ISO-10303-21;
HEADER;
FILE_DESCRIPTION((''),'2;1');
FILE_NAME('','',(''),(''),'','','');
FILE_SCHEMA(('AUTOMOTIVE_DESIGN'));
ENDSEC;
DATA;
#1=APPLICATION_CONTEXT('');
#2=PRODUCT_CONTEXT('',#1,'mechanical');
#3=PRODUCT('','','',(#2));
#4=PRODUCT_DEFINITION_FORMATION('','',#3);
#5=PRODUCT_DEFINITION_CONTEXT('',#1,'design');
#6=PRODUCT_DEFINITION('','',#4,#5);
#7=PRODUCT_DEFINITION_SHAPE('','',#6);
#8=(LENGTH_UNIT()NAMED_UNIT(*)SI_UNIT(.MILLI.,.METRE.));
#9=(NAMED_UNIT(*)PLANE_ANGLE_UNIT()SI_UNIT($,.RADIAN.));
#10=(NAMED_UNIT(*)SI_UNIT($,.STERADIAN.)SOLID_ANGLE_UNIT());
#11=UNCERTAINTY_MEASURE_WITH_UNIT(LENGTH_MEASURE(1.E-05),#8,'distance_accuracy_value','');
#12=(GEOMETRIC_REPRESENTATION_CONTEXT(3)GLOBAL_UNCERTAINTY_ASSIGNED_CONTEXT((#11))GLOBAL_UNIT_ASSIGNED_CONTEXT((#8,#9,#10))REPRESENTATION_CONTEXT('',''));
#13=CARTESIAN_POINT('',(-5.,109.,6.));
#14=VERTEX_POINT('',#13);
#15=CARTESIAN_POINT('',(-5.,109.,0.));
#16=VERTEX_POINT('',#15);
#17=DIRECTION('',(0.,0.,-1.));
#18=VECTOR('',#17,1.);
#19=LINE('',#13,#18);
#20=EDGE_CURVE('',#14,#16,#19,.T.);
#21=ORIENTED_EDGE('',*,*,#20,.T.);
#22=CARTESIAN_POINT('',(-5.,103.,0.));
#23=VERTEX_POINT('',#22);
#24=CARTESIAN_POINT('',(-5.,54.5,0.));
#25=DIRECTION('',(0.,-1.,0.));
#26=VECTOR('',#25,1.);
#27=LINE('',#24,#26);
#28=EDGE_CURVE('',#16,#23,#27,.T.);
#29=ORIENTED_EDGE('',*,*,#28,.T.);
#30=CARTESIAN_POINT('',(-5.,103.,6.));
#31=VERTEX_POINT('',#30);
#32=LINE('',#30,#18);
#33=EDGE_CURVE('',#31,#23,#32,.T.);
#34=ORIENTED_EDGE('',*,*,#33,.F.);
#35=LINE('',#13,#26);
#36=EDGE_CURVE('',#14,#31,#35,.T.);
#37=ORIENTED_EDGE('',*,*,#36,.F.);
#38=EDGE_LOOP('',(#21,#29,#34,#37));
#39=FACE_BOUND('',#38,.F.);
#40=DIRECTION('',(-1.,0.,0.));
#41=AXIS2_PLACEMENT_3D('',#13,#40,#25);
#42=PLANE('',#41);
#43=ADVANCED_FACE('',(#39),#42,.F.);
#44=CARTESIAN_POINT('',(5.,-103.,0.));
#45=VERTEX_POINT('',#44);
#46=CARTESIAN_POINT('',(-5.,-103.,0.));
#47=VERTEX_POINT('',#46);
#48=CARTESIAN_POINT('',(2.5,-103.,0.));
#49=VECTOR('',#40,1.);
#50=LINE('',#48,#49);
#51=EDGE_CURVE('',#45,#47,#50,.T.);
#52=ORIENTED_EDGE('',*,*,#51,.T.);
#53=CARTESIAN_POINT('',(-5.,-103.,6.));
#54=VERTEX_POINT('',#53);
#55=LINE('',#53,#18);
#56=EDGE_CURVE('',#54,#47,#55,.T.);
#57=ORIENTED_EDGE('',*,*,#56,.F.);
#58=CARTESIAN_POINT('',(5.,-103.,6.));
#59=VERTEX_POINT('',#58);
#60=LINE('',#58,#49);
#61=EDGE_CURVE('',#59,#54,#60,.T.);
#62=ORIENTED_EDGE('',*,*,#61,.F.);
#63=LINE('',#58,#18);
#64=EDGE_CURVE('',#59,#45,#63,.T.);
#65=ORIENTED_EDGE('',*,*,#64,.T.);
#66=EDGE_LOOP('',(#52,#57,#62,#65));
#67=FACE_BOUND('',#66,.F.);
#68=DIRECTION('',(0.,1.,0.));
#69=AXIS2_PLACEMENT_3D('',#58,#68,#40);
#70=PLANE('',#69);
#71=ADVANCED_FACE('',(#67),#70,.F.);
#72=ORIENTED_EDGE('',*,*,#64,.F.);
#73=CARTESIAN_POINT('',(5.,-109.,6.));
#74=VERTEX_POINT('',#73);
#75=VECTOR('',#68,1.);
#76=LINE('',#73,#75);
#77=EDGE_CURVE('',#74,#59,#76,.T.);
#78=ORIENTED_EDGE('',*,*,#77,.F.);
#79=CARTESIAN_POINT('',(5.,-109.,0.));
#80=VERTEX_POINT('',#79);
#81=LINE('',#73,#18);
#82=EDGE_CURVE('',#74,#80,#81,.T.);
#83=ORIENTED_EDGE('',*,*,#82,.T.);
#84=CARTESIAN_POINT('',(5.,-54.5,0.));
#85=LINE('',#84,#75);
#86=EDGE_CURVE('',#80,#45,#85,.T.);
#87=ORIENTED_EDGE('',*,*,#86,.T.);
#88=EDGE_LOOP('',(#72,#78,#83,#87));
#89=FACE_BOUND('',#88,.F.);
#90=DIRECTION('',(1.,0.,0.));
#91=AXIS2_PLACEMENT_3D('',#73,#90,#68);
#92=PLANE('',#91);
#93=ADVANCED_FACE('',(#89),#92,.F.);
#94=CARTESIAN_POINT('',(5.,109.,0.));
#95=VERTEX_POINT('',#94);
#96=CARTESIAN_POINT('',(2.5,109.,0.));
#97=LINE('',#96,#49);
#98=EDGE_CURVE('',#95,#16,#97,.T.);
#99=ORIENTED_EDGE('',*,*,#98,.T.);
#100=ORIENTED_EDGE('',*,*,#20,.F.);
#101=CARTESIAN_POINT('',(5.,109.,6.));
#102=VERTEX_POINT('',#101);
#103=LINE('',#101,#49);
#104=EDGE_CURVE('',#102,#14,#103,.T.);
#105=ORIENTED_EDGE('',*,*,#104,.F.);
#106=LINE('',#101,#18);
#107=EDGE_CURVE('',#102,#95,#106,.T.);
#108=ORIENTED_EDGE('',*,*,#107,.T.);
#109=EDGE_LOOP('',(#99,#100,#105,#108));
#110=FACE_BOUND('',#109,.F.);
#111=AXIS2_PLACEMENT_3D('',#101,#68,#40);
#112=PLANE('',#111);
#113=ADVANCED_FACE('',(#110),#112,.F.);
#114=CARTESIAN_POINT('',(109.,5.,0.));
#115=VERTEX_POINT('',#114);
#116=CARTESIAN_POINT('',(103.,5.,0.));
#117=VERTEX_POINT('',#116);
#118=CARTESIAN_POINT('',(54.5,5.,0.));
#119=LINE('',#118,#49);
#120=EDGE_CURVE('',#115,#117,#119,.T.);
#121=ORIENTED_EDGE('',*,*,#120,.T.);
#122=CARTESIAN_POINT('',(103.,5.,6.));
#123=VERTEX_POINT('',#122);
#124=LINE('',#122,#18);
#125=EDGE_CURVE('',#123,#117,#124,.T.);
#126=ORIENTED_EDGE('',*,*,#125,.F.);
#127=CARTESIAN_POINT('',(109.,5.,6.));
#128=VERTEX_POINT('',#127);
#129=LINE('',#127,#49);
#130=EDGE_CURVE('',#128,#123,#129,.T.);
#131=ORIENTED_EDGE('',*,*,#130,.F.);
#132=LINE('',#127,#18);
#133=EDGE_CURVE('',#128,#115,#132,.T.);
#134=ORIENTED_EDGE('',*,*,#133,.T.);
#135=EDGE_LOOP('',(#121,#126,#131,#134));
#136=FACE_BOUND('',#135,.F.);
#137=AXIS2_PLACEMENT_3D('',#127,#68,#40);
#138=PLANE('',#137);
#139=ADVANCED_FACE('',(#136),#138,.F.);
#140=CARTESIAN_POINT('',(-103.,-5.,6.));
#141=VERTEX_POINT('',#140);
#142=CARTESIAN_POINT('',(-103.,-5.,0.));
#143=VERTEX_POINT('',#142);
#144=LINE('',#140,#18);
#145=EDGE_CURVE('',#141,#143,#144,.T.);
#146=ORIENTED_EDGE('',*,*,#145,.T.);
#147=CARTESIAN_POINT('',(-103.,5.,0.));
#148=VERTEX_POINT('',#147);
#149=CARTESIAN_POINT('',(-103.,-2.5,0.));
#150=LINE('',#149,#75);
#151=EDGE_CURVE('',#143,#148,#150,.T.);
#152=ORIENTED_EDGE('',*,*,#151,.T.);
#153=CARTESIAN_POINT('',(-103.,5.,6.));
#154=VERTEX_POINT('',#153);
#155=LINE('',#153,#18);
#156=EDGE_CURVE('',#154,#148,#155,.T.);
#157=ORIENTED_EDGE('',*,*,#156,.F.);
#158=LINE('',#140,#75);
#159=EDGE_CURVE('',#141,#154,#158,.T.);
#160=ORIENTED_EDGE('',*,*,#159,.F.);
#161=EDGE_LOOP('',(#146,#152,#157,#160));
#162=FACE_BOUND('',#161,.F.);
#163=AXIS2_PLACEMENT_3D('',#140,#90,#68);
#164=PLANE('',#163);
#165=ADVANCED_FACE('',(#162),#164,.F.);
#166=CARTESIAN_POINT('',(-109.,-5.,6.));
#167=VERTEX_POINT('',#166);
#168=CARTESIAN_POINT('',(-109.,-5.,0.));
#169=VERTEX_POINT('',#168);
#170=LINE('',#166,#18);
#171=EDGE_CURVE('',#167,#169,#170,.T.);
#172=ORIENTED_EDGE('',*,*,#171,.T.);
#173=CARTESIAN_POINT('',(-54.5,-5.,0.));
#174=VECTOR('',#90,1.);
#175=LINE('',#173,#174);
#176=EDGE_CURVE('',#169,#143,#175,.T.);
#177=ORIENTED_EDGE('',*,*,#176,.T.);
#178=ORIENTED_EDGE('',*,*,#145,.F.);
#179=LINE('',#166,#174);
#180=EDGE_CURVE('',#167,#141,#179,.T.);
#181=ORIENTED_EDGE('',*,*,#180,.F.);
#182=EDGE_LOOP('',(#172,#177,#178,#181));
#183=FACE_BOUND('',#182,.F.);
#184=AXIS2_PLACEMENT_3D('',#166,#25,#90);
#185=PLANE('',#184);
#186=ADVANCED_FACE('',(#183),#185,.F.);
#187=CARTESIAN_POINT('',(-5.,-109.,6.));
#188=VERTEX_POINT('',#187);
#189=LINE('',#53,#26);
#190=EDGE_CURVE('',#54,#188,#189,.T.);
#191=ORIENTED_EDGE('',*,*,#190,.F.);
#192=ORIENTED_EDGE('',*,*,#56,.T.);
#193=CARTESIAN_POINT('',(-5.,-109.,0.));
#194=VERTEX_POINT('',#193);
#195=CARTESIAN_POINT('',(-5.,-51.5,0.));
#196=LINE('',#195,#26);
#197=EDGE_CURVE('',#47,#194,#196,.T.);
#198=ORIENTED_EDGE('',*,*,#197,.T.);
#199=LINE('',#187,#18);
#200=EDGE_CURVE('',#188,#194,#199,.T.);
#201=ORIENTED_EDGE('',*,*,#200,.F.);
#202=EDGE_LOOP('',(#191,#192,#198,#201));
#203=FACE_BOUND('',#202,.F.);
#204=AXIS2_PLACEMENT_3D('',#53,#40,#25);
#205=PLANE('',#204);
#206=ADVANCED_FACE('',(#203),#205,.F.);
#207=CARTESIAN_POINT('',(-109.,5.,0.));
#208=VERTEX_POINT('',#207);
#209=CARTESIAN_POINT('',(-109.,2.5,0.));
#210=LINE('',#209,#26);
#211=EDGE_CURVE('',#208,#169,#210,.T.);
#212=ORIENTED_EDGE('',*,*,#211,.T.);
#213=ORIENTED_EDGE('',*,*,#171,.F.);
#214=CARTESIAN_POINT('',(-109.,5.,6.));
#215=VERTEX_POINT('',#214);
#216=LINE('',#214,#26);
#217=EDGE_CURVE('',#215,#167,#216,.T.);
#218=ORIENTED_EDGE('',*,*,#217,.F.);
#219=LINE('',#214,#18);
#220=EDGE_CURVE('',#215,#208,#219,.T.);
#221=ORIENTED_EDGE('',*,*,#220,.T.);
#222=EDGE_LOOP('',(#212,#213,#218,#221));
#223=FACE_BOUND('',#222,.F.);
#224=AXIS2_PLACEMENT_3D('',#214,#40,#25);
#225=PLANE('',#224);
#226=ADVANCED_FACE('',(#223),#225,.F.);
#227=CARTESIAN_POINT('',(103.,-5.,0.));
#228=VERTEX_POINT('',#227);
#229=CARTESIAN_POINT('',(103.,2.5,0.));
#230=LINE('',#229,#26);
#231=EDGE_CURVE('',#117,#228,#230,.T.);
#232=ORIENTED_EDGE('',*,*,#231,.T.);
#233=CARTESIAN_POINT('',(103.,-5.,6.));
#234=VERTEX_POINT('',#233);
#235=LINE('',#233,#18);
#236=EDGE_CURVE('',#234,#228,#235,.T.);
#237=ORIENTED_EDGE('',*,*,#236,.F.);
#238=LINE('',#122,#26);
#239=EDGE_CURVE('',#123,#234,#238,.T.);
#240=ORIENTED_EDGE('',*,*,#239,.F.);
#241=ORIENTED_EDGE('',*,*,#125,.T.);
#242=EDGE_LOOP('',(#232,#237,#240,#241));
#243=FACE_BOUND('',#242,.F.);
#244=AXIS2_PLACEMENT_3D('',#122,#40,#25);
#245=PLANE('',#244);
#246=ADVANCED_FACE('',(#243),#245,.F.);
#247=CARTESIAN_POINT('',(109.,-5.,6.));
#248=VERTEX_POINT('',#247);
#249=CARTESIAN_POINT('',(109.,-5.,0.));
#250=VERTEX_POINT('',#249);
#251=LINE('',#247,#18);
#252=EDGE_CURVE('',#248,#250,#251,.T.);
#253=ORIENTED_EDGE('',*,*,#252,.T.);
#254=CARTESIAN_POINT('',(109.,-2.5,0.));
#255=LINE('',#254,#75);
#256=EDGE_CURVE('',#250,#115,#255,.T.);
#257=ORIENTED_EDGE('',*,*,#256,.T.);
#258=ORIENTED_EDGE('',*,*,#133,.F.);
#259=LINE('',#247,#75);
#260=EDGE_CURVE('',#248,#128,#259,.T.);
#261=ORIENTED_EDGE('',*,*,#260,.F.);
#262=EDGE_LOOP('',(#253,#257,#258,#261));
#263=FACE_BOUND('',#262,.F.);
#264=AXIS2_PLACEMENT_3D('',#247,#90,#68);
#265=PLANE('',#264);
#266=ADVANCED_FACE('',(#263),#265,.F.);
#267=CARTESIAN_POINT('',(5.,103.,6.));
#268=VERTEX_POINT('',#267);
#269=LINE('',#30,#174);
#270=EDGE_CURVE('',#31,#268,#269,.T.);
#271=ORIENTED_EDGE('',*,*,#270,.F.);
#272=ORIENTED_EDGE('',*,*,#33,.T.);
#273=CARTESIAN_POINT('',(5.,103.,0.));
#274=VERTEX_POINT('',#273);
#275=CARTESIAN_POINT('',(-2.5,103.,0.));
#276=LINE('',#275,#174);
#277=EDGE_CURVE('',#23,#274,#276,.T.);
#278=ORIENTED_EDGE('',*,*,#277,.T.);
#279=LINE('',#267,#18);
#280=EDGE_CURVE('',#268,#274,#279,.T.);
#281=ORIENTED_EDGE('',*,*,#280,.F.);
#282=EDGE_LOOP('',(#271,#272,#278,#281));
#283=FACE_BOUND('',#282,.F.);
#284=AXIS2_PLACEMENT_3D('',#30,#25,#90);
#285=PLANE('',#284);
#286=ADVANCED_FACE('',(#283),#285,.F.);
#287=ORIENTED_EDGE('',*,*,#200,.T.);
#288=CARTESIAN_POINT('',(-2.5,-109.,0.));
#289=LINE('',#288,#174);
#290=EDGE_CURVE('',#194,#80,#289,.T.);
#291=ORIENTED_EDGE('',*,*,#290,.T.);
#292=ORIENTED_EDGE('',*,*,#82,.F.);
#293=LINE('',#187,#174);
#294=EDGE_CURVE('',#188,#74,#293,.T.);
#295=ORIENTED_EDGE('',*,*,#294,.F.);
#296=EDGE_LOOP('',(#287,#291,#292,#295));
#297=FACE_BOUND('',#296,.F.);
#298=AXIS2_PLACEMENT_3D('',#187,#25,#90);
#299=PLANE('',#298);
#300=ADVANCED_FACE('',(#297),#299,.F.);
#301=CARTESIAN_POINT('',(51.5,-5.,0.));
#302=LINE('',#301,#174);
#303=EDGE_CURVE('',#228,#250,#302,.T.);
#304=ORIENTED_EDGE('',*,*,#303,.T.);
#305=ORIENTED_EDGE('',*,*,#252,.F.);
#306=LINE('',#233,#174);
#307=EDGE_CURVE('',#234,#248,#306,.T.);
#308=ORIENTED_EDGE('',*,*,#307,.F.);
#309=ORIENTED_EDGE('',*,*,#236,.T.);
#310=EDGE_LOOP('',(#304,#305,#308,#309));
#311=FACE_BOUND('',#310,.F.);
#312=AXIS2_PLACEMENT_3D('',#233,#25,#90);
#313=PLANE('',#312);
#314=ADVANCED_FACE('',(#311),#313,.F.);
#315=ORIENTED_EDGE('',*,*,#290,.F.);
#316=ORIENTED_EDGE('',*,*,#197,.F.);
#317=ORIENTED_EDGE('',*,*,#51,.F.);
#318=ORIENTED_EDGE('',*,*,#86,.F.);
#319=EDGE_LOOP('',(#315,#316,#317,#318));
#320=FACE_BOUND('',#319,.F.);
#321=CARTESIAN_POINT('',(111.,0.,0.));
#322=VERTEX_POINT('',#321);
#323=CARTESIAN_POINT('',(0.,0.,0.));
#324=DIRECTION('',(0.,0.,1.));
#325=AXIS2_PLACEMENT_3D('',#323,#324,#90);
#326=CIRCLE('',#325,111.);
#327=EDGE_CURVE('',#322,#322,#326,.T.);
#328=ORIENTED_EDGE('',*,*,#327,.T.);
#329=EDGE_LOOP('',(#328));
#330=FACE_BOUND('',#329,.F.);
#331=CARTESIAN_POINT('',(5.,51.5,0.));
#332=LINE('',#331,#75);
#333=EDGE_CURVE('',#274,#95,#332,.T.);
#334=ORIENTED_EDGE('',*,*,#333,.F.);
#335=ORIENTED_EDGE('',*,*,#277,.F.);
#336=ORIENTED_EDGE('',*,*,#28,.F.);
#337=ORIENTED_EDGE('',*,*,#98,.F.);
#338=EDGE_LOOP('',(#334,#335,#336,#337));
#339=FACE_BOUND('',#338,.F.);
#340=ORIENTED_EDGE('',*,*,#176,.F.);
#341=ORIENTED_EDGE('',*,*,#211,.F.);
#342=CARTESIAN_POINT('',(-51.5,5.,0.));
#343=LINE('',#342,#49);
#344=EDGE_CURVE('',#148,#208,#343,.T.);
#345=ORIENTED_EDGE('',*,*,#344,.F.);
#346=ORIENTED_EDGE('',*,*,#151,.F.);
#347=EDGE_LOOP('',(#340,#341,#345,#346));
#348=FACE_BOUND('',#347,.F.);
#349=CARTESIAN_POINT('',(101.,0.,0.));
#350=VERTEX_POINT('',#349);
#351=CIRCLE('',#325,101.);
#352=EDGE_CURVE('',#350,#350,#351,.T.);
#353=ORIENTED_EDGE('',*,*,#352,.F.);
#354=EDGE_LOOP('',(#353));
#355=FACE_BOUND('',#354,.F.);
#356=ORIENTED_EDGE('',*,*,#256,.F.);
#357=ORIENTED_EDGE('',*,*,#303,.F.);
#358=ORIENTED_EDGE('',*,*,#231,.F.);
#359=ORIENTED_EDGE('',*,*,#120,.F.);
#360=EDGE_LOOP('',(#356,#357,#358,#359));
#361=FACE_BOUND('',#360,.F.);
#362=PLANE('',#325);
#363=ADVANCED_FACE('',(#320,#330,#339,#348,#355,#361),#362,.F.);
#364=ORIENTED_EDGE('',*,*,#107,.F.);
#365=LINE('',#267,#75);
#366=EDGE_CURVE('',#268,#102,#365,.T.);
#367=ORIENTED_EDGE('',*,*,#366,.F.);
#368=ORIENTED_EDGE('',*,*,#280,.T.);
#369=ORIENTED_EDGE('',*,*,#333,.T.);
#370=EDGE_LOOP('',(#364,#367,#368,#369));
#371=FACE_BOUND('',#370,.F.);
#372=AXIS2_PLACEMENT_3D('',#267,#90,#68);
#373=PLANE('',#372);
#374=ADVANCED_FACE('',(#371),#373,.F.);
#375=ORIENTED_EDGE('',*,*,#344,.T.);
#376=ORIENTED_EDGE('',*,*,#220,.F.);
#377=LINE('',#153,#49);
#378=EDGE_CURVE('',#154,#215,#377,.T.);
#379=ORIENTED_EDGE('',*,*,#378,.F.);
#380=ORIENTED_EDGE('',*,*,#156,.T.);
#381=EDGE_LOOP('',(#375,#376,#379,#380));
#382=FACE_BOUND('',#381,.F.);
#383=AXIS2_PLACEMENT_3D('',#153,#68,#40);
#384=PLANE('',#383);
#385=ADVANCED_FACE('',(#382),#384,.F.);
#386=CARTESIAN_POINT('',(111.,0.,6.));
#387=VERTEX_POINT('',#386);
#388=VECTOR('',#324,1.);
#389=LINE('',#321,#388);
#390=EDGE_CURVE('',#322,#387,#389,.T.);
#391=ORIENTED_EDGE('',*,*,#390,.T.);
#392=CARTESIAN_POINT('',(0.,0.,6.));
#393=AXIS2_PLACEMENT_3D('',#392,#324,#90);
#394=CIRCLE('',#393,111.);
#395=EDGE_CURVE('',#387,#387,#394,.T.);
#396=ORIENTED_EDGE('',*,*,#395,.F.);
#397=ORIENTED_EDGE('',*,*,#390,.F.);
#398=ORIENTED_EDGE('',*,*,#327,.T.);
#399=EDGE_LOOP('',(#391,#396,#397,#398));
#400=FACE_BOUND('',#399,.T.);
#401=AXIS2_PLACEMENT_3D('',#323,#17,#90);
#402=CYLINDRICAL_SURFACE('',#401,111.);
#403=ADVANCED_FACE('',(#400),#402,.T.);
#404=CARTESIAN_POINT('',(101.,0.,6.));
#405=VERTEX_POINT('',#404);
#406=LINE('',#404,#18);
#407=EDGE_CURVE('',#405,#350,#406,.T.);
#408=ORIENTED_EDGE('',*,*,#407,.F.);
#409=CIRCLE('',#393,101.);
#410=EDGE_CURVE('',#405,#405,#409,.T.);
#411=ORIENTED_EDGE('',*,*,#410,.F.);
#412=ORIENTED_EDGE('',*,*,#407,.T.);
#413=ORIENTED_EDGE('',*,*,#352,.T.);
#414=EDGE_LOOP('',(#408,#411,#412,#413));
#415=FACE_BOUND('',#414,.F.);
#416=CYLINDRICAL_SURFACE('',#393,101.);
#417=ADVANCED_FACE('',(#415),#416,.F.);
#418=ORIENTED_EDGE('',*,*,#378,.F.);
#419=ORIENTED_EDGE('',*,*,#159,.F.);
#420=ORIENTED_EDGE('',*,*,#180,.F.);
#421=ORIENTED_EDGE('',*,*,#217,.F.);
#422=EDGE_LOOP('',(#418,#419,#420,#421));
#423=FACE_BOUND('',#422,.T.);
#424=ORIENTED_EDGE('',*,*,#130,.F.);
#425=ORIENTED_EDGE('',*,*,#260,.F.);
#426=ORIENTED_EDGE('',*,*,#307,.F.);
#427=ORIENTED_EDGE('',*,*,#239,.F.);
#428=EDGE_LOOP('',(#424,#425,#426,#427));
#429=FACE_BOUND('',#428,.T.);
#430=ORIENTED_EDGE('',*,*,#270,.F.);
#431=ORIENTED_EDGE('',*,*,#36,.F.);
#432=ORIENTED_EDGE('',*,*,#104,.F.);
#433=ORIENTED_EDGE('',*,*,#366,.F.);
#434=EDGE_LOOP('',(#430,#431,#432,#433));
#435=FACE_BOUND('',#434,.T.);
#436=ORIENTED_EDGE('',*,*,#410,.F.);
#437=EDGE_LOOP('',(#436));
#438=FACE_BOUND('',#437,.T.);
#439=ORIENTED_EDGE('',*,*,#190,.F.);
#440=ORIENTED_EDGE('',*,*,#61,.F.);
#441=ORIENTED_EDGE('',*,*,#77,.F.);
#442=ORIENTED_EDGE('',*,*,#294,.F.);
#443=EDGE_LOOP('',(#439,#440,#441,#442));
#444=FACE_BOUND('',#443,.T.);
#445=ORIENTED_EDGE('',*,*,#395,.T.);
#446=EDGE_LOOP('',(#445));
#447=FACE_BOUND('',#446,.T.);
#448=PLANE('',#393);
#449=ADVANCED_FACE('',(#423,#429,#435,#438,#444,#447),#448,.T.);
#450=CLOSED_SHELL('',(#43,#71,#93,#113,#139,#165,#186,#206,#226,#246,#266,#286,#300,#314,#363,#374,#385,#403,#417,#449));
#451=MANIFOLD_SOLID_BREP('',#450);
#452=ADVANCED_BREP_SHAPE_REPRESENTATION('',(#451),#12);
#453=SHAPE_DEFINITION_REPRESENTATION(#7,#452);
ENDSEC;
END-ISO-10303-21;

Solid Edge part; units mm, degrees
sketch "Sketch1" plane through (0, 0, 0) normal (0, 0, 1) x (1, 0, 0)
  circle A0 centre (0, 0) radius 111
  dimension "D1" = 222
extrude "Protrusion1" add sketch "Sketch1" along normal blind 6
sketch "Sketch2" plane through (0, 0, 6) normal (0, 0, 1) x (1, 0, 0)
  circle A0 centre (0, 0) radius 101
extrude "Cutout1" cut sketch "Sketch2" against normal through all
sketch "Sketch3" plane through (0, 0, 6) normal (0, 0, 1) x (1, 0, 0)
  line L0 (-5, 103) -> (5, 103)
  line L1 (5, 103) -> (5, 109)
  line L2 (5, 109) -> (-5, 109)
  line L3 (-5, 109) -> (-5, 103)
  dimension "D1" = 10
  dimension "D2" = 6
  dimension "D3" = 103
extrude "Cutout2" cut sketch "Sketch3" against normal through all
pattern_circular "Pattern1" count 4 over 360 about axis through (0, 0, 6) along (0, 0, -1) of "Cutout2"
properties material "Wood, Mahogany"
